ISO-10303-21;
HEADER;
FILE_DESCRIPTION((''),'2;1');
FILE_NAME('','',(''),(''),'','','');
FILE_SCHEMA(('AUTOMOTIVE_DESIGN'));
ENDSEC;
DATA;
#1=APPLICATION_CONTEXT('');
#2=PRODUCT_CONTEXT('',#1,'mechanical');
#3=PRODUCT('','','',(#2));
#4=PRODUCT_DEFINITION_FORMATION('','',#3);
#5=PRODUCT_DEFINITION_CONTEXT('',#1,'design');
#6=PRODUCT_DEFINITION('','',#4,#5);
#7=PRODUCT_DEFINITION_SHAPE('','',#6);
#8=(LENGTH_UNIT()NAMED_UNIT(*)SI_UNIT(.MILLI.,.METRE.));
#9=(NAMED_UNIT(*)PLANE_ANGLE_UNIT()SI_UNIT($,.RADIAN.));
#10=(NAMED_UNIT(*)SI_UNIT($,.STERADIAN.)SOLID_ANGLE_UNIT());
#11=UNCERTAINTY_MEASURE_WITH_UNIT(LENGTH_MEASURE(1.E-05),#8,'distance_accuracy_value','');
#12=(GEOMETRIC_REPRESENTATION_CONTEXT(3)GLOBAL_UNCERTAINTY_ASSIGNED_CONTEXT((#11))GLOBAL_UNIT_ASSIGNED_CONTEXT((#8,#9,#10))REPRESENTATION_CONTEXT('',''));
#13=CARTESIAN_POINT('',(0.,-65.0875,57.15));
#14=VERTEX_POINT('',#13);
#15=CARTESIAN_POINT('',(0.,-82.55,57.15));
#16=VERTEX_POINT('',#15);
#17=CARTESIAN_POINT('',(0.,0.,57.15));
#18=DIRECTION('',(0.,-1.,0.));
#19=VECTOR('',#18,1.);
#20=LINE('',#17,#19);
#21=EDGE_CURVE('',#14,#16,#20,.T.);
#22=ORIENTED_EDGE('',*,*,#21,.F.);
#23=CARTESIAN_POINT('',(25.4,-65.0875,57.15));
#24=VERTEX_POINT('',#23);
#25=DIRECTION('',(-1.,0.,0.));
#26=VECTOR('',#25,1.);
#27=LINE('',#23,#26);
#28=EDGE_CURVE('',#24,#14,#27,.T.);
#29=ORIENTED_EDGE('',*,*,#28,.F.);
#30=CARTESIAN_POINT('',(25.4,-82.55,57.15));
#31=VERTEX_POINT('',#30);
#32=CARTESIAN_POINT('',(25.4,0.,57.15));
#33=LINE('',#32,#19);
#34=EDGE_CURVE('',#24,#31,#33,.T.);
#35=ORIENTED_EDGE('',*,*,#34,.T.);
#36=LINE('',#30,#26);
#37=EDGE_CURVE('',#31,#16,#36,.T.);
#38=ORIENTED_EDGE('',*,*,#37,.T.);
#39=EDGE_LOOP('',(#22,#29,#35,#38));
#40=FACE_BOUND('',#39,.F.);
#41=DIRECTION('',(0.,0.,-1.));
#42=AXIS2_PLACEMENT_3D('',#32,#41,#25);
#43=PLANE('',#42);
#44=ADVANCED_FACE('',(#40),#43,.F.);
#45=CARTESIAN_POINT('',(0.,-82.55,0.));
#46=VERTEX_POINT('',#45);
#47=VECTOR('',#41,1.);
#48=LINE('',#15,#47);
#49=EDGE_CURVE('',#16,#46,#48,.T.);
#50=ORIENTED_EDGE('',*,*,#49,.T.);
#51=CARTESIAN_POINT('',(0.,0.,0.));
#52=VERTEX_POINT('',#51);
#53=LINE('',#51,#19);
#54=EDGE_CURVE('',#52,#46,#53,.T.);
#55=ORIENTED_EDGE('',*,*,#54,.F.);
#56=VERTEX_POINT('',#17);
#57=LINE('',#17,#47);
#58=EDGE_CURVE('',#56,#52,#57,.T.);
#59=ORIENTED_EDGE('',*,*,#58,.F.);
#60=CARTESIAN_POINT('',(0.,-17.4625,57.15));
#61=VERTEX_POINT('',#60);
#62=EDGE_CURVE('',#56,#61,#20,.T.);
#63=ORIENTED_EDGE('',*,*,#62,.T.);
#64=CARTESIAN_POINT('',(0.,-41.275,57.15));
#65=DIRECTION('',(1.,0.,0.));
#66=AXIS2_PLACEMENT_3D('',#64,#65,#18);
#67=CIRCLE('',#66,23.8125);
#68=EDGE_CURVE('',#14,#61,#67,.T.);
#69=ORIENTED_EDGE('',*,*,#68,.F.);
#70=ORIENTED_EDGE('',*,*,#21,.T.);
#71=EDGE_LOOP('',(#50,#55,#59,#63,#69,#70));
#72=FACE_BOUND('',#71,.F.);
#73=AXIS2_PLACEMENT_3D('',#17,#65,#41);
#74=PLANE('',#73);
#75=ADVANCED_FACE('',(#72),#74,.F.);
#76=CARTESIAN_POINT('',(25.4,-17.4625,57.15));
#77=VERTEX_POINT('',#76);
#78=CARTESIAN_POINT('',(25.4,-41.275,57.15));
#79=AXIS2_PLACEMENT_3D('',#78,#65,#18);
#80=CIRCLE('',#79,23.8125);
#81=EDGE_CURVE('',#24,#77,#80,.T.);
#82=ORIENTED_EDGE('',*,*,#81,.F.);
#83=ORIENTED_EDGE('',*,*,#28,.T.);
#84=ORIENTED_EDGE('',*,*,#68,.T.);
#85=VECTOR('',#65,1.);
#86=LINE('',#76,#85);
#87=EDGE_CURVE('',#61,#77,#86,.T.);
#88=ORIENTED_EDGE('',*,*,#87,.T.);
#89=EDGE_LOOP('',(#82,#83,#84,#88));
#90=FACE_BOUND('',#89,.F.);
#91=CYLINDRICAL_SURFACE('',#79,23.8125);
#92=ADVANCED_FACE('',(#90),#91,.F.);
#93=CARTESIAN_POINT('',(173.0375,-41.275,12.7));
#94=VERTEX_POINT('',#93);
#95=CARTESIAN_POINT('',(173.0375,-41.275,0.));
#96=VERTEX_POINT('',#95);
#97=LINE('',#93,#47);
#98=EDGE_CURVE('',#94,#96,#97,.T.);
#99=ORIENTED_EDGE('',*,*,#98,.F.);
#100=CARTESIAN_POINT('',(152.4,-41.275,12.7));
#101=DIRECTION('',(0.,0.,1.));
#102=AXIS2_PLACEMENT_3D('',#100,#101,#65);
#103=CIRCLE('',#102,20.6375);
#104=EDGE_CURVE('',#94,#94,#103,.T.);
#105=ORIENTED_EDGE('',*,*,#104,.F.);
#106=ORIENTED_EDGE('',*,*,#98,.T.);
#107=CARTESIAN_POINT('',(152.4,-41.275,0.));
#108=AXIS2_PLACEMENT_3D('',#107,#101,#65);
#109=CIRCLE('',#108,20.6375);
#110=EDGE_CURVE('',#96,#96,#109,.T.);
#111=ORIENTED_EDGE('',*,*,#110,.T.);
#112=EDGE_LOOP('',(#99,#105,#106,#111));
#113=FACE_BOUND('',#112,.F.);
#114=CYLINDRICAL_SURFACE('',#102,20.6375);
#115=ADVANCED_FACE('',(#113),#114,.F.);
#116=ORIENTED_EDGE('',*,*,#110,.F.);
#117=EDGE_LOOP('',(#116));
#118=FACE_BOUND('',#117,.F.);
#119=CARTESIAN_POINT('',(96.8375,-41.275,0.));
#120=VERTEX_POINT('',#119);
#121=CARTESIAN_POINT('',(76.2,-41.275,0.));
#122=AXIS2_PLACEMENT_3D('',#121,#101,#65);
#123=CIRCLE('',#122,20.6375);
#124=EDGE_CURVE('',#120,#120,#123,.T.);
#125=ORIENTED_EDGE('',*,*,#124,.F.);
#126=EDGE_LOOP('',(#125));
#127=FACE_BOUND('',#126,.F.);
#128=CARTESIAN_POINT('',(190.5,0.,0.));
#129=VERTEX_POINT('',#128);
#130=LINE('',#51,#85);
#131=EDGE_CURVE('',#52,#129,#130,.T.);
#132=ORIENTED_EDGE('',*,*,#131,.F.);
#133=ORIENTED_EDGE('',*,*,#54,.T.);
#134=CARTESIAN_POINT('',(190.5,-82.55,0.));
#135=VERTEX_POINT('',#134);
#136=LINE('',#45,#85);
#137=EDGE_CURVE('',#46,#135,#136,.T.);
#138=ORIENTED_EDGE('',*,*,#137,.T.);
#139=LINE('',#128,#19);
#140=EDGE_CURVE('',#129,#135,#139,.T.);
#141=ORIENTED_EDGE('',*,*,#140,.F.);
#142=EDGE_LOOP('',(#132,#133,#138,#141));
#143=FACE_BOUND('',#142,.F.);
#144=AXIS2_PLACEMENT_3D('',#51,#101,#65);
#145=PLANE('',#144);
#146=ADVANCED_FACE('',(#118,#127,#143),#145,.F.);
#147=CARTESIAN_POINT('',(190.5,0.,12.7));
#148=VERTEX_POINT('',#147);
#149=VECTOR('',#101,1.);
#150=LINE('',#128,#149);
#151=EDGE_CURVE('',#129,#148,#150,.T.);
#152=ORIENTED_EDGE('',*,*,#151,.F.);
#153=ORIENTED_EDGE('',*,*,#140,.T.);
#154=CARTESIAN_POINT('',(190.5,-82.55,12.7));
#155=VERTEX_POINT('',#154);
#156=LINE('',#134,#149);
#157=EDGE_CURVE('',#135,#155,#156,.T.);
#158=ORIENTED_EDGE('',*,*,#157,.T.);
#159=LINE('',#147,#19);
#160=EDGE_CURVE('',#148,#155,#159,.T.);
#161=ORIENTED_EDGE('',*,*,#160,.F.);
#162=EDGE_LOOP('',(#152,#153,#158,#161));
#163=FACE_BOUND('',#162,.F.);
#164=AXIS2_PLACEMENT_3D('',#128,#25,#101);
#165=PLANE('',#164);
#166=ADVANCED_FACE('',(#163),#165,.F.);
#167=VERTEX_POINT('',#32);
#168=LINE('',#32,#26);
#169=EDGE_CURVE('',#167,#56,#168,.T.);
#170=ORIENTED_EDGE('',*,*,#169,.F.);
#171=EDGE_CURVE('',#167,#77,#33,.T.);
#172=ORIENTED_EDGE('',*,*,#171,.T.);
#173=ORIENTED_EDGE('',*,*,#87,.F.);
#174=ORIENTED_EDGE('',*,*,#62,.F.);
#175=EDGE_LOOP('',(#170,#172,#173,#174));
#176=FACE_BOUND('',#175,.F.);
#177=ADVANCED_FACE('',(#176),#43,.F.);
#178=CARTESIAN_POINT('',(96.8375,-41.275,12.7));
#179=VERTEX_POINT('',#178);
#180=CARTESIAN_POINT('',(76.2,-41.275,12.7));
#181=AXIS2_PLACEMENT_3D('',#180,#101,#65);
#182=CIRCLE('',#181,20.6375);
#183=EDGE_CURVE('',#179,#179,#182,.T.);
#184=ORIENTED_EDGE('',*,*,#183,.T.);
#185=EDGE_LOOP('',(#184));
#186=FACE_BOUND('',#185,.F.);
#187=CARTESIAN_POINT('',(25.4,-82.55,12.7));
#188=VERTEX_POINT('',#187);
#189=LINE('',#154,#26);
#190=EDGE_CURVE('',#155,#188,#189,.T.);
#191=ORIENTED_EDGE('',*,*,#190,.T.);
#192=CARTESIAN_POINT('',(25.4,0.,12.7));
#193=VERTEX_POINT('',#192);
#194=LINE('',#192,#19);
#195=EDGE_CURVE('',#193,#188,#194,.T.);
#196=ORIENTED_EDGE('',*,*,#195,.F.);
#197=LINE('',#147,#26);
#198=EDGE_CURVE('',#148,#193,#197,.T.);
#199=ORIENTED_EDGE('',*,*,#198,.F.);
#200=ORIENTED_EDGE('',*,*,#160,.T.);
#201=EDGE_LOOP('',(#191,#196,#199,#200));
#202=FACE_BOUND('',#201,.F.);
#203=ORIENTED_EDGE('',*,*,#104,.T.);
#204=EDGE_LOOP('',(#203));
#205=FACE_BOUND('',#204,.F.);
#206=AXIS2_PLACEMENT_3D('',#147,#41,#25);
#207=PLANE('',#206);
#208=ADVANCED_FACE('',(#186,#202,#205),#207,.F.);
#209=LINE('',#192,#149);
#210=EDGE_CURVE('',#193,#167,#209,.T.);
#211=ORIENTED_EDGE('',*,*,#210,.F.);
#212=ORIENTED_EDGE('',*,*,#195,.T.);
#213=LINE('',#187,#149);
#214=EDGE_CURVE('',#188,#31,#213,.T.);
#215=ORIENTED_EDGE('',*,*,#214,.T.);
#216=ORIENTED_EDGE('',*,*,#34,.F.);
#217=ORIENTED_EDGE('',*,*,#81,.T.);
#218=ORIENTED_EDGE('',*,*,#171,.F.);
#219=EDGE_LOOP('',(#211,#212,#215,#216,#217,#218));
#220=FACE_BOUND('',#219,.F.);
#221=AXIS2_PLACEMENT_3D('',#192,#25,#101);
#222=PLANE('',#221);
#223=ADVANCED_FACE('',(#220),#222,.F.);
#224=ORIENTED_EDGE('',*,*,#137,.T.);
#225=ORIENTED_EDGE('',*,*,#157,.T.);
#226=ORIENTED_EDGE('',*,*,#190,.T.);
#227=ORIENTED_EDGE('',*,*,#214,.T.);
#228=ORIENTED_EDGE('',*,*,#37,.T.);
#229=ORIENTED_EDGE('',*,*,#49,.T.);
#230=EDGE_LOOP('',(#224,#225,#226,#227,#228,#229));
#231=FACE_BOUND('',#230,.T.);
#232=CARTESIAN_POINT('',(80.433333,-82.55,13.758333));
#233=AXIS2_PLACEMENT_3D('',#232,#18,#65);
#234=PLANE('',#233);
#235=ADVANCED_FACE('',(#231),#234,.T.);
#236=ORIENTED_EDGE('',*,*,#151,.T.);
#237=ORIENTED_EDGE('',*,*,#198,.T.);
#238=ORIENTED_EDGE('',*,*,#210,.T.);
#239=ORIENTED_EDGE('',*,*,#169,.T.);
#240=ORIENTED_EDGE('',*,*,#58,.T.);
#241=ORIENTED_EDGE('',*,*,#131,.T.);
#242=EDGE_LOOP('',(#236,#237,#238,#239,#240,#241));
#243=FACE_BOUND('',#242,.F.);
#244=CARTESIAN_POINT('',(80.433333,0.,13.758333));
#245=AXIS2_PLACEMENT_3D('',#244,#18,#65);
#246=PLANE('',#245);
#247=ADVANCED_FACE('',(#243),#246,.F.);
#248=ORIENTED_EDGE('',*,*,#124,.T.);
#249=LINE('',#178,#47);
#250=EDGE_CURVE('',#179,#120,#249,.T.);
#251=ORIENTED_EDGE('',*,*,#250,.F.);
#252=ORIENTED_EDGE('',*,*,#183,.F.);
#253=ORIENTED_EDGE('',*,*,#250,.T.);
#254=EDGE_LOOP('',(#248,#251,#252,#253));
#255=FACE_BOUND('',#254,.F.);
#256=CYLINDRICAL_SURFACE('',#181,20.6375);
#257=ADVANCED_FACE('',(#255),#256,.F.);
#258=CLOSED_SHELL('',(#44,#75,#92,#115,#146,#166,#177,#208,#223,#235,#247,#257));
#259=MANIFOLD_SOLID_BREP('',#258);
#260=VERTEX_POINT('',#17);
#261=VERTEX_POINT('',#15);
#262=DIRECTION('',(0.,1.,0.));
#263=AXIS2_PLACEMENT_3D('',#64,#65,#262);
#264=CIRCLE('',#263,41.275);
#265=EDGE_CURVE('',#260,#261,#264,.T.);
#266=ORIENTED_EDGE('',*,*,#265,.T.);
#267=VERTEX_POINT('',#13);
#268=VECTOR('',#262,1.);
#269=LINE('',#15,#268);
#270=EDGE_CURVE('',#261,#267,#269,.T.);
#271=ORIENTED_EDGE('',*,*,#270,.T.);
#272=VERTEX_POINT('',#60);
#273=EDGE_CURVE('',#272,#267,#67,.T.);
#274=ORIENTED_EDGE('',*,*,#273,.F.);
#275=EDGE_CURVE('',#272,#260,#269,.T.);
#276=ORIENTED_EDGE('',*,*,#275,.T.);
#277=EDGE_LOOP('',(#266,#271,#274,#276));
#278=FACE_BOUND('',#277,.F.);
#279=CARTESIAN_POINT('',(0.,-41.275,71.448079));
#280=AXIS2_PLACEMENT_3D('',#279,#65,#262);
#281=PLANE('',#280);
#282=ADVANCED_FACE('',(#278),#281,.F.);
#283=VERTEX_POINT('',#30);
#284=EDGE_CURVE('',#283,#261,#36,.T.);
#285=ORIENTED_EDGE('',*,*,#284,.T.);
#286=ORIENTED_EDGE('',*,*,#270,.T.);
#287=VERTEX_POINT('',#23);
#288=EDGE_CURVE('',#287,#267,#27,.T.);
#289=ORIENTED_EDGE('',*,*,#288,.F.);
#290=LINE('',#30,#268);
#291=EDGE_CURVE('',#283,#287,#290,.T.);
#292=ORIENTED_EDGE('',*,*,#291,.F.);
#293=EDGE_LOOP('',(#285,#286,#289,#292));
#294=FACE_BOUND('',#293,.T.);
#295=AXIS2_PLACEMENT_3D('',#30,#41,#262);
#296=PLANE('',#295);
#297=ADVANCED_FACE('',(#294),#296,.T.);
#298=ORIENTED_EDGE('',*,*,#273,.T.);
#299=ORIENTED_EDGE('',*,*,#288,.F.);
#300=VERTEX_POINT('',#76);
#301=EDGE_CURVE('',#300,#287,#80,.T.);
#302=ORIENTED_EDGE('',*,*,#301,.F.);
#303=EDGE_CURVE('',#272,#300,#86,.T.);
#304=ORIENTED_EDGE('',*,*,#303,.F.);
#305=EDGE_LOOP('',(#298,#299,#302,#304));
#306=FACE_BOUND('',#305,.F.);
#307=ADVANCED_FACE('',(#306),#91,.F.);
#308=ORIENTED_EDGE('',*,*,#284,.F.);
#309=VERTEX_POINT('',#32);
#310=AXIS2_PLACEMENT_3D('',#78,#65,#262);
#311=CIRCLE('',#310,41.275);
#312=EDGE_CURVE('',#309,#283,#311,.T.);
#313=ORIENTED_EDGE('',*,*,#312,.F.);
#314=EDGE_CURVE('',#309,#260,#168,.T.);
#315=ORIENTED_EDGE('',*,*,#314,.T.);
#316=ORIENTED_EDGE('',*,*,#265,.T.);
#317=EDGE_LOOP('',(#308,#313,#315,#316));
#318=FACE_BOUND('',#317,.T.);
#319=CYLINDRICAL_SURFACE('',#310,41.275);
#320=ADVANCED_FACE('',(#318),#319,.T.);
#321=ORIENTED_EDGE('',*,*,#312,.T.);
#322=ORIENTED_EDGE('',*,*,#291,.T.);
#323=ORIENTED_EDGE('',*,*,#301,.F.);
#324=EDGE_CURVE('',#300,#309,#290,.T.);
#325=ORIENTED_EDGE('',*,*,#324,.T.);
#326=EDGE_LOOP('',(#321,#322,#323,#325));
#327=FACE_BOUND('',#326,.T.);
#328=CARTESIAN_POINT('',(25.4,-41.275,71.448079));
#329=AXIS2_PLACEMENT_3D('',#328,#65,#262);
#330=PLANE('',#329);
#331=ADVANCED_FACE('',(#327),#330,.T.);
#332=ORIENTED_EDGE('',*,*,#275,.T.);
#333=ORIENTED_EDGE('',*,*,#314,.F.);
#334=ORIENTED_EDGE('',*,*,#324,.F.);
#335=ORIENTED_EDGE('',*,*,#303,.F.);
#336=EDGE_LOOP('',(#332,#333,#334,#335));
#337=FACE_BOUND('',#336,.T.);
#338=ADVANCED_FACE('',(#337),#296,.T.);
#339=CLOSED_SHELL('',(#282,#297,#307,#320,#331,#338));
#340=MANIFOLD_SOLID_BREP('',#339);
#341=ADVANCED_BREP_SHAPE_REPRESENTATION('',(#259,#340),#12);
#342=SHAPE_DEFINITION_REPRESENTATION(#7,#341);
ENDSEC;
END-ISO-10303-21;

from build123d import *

# Parameters (mm, degrees)
F1_DEPTH = 82.55
F2_R     = 20.6375
F3_DEPTH = 12.701
F5_DEPTH = 25.4
F7_DEPTH = 25.401


# Not quite as in the source:
# - a feature of the source that left no trace in its solid (it failed there, or was rolled back) is left out


with BuildPart() as f1:
    # F0 (on Front) → F1 (new body)
    with BuildSketch(Plane.XZ):
        Polygon((0, 57.15), (0, 0), (190.5, 0), (190.5, 12.7), (25.4, 12.7), (25.4, 57.15), align=None)
    extrude(amount=F1_DEPTH)

    # F2 (on face) → F3 (cut, through all)
    with BuildSketch(Plane.XY.offset(12.7)):
        with Locations((76.2, -41.275)):
            Circle(F2_R)
        with Locations((152.4, -41.275)):
            Circle(F2_R)
    extrude(amount=-F3_DEPTH, mode=Mode.SUBTRACT)


with BuildPart() as f5:
    # F4 (on face) → F5 (new body)
    with BuildSketch(Plane.YZ.offset(25.4)):
        with BuildLine():
            Line((-82.55, 57.15), (0, 57.15))
            ThreePointArc((0, 57.15), (-41.275, 98.425), (-82.55, 57.15))
        make_face()
    extrude(amount=-F5_DEPTH)


with BuildPart() as f7_tool:
    # F6 (on face) → F7 (new body, through all)
    with BuildSketch(Plane.YZ.offset(25.4)):
        with BuildLine():
            Line((-65.0875, 57.15), (-17.4625, 57.15))
            ThreePointArc((-17.4625, 57.15), (-41.275, 80.9625), (-65.0875, 57.15))
        make_face()
        with BuildLine():
            ThreePointArc((-65.0875, 57.15), (-41.275, 33.3375), (-17.4625, 57.15))
            Line((-17.4625, 57.15), (-65.0875, 57.15))
        make_face()
    extrude(amount=-F7_DEPTH)


with BuildPart() as f1_1:
    add(f1.part)

    # F7: cut by f7_tool
    add(f7_tool.part, mode=Mode.SUBTRACT)


with BuildPart() as f5_1:
    add(f5.part)

    # F7: cut by f7_tool
    add(f7_tool.part, mode=Mode.SUBTRACT)


solid = Compound([f1_1.part, f5_1.part])
